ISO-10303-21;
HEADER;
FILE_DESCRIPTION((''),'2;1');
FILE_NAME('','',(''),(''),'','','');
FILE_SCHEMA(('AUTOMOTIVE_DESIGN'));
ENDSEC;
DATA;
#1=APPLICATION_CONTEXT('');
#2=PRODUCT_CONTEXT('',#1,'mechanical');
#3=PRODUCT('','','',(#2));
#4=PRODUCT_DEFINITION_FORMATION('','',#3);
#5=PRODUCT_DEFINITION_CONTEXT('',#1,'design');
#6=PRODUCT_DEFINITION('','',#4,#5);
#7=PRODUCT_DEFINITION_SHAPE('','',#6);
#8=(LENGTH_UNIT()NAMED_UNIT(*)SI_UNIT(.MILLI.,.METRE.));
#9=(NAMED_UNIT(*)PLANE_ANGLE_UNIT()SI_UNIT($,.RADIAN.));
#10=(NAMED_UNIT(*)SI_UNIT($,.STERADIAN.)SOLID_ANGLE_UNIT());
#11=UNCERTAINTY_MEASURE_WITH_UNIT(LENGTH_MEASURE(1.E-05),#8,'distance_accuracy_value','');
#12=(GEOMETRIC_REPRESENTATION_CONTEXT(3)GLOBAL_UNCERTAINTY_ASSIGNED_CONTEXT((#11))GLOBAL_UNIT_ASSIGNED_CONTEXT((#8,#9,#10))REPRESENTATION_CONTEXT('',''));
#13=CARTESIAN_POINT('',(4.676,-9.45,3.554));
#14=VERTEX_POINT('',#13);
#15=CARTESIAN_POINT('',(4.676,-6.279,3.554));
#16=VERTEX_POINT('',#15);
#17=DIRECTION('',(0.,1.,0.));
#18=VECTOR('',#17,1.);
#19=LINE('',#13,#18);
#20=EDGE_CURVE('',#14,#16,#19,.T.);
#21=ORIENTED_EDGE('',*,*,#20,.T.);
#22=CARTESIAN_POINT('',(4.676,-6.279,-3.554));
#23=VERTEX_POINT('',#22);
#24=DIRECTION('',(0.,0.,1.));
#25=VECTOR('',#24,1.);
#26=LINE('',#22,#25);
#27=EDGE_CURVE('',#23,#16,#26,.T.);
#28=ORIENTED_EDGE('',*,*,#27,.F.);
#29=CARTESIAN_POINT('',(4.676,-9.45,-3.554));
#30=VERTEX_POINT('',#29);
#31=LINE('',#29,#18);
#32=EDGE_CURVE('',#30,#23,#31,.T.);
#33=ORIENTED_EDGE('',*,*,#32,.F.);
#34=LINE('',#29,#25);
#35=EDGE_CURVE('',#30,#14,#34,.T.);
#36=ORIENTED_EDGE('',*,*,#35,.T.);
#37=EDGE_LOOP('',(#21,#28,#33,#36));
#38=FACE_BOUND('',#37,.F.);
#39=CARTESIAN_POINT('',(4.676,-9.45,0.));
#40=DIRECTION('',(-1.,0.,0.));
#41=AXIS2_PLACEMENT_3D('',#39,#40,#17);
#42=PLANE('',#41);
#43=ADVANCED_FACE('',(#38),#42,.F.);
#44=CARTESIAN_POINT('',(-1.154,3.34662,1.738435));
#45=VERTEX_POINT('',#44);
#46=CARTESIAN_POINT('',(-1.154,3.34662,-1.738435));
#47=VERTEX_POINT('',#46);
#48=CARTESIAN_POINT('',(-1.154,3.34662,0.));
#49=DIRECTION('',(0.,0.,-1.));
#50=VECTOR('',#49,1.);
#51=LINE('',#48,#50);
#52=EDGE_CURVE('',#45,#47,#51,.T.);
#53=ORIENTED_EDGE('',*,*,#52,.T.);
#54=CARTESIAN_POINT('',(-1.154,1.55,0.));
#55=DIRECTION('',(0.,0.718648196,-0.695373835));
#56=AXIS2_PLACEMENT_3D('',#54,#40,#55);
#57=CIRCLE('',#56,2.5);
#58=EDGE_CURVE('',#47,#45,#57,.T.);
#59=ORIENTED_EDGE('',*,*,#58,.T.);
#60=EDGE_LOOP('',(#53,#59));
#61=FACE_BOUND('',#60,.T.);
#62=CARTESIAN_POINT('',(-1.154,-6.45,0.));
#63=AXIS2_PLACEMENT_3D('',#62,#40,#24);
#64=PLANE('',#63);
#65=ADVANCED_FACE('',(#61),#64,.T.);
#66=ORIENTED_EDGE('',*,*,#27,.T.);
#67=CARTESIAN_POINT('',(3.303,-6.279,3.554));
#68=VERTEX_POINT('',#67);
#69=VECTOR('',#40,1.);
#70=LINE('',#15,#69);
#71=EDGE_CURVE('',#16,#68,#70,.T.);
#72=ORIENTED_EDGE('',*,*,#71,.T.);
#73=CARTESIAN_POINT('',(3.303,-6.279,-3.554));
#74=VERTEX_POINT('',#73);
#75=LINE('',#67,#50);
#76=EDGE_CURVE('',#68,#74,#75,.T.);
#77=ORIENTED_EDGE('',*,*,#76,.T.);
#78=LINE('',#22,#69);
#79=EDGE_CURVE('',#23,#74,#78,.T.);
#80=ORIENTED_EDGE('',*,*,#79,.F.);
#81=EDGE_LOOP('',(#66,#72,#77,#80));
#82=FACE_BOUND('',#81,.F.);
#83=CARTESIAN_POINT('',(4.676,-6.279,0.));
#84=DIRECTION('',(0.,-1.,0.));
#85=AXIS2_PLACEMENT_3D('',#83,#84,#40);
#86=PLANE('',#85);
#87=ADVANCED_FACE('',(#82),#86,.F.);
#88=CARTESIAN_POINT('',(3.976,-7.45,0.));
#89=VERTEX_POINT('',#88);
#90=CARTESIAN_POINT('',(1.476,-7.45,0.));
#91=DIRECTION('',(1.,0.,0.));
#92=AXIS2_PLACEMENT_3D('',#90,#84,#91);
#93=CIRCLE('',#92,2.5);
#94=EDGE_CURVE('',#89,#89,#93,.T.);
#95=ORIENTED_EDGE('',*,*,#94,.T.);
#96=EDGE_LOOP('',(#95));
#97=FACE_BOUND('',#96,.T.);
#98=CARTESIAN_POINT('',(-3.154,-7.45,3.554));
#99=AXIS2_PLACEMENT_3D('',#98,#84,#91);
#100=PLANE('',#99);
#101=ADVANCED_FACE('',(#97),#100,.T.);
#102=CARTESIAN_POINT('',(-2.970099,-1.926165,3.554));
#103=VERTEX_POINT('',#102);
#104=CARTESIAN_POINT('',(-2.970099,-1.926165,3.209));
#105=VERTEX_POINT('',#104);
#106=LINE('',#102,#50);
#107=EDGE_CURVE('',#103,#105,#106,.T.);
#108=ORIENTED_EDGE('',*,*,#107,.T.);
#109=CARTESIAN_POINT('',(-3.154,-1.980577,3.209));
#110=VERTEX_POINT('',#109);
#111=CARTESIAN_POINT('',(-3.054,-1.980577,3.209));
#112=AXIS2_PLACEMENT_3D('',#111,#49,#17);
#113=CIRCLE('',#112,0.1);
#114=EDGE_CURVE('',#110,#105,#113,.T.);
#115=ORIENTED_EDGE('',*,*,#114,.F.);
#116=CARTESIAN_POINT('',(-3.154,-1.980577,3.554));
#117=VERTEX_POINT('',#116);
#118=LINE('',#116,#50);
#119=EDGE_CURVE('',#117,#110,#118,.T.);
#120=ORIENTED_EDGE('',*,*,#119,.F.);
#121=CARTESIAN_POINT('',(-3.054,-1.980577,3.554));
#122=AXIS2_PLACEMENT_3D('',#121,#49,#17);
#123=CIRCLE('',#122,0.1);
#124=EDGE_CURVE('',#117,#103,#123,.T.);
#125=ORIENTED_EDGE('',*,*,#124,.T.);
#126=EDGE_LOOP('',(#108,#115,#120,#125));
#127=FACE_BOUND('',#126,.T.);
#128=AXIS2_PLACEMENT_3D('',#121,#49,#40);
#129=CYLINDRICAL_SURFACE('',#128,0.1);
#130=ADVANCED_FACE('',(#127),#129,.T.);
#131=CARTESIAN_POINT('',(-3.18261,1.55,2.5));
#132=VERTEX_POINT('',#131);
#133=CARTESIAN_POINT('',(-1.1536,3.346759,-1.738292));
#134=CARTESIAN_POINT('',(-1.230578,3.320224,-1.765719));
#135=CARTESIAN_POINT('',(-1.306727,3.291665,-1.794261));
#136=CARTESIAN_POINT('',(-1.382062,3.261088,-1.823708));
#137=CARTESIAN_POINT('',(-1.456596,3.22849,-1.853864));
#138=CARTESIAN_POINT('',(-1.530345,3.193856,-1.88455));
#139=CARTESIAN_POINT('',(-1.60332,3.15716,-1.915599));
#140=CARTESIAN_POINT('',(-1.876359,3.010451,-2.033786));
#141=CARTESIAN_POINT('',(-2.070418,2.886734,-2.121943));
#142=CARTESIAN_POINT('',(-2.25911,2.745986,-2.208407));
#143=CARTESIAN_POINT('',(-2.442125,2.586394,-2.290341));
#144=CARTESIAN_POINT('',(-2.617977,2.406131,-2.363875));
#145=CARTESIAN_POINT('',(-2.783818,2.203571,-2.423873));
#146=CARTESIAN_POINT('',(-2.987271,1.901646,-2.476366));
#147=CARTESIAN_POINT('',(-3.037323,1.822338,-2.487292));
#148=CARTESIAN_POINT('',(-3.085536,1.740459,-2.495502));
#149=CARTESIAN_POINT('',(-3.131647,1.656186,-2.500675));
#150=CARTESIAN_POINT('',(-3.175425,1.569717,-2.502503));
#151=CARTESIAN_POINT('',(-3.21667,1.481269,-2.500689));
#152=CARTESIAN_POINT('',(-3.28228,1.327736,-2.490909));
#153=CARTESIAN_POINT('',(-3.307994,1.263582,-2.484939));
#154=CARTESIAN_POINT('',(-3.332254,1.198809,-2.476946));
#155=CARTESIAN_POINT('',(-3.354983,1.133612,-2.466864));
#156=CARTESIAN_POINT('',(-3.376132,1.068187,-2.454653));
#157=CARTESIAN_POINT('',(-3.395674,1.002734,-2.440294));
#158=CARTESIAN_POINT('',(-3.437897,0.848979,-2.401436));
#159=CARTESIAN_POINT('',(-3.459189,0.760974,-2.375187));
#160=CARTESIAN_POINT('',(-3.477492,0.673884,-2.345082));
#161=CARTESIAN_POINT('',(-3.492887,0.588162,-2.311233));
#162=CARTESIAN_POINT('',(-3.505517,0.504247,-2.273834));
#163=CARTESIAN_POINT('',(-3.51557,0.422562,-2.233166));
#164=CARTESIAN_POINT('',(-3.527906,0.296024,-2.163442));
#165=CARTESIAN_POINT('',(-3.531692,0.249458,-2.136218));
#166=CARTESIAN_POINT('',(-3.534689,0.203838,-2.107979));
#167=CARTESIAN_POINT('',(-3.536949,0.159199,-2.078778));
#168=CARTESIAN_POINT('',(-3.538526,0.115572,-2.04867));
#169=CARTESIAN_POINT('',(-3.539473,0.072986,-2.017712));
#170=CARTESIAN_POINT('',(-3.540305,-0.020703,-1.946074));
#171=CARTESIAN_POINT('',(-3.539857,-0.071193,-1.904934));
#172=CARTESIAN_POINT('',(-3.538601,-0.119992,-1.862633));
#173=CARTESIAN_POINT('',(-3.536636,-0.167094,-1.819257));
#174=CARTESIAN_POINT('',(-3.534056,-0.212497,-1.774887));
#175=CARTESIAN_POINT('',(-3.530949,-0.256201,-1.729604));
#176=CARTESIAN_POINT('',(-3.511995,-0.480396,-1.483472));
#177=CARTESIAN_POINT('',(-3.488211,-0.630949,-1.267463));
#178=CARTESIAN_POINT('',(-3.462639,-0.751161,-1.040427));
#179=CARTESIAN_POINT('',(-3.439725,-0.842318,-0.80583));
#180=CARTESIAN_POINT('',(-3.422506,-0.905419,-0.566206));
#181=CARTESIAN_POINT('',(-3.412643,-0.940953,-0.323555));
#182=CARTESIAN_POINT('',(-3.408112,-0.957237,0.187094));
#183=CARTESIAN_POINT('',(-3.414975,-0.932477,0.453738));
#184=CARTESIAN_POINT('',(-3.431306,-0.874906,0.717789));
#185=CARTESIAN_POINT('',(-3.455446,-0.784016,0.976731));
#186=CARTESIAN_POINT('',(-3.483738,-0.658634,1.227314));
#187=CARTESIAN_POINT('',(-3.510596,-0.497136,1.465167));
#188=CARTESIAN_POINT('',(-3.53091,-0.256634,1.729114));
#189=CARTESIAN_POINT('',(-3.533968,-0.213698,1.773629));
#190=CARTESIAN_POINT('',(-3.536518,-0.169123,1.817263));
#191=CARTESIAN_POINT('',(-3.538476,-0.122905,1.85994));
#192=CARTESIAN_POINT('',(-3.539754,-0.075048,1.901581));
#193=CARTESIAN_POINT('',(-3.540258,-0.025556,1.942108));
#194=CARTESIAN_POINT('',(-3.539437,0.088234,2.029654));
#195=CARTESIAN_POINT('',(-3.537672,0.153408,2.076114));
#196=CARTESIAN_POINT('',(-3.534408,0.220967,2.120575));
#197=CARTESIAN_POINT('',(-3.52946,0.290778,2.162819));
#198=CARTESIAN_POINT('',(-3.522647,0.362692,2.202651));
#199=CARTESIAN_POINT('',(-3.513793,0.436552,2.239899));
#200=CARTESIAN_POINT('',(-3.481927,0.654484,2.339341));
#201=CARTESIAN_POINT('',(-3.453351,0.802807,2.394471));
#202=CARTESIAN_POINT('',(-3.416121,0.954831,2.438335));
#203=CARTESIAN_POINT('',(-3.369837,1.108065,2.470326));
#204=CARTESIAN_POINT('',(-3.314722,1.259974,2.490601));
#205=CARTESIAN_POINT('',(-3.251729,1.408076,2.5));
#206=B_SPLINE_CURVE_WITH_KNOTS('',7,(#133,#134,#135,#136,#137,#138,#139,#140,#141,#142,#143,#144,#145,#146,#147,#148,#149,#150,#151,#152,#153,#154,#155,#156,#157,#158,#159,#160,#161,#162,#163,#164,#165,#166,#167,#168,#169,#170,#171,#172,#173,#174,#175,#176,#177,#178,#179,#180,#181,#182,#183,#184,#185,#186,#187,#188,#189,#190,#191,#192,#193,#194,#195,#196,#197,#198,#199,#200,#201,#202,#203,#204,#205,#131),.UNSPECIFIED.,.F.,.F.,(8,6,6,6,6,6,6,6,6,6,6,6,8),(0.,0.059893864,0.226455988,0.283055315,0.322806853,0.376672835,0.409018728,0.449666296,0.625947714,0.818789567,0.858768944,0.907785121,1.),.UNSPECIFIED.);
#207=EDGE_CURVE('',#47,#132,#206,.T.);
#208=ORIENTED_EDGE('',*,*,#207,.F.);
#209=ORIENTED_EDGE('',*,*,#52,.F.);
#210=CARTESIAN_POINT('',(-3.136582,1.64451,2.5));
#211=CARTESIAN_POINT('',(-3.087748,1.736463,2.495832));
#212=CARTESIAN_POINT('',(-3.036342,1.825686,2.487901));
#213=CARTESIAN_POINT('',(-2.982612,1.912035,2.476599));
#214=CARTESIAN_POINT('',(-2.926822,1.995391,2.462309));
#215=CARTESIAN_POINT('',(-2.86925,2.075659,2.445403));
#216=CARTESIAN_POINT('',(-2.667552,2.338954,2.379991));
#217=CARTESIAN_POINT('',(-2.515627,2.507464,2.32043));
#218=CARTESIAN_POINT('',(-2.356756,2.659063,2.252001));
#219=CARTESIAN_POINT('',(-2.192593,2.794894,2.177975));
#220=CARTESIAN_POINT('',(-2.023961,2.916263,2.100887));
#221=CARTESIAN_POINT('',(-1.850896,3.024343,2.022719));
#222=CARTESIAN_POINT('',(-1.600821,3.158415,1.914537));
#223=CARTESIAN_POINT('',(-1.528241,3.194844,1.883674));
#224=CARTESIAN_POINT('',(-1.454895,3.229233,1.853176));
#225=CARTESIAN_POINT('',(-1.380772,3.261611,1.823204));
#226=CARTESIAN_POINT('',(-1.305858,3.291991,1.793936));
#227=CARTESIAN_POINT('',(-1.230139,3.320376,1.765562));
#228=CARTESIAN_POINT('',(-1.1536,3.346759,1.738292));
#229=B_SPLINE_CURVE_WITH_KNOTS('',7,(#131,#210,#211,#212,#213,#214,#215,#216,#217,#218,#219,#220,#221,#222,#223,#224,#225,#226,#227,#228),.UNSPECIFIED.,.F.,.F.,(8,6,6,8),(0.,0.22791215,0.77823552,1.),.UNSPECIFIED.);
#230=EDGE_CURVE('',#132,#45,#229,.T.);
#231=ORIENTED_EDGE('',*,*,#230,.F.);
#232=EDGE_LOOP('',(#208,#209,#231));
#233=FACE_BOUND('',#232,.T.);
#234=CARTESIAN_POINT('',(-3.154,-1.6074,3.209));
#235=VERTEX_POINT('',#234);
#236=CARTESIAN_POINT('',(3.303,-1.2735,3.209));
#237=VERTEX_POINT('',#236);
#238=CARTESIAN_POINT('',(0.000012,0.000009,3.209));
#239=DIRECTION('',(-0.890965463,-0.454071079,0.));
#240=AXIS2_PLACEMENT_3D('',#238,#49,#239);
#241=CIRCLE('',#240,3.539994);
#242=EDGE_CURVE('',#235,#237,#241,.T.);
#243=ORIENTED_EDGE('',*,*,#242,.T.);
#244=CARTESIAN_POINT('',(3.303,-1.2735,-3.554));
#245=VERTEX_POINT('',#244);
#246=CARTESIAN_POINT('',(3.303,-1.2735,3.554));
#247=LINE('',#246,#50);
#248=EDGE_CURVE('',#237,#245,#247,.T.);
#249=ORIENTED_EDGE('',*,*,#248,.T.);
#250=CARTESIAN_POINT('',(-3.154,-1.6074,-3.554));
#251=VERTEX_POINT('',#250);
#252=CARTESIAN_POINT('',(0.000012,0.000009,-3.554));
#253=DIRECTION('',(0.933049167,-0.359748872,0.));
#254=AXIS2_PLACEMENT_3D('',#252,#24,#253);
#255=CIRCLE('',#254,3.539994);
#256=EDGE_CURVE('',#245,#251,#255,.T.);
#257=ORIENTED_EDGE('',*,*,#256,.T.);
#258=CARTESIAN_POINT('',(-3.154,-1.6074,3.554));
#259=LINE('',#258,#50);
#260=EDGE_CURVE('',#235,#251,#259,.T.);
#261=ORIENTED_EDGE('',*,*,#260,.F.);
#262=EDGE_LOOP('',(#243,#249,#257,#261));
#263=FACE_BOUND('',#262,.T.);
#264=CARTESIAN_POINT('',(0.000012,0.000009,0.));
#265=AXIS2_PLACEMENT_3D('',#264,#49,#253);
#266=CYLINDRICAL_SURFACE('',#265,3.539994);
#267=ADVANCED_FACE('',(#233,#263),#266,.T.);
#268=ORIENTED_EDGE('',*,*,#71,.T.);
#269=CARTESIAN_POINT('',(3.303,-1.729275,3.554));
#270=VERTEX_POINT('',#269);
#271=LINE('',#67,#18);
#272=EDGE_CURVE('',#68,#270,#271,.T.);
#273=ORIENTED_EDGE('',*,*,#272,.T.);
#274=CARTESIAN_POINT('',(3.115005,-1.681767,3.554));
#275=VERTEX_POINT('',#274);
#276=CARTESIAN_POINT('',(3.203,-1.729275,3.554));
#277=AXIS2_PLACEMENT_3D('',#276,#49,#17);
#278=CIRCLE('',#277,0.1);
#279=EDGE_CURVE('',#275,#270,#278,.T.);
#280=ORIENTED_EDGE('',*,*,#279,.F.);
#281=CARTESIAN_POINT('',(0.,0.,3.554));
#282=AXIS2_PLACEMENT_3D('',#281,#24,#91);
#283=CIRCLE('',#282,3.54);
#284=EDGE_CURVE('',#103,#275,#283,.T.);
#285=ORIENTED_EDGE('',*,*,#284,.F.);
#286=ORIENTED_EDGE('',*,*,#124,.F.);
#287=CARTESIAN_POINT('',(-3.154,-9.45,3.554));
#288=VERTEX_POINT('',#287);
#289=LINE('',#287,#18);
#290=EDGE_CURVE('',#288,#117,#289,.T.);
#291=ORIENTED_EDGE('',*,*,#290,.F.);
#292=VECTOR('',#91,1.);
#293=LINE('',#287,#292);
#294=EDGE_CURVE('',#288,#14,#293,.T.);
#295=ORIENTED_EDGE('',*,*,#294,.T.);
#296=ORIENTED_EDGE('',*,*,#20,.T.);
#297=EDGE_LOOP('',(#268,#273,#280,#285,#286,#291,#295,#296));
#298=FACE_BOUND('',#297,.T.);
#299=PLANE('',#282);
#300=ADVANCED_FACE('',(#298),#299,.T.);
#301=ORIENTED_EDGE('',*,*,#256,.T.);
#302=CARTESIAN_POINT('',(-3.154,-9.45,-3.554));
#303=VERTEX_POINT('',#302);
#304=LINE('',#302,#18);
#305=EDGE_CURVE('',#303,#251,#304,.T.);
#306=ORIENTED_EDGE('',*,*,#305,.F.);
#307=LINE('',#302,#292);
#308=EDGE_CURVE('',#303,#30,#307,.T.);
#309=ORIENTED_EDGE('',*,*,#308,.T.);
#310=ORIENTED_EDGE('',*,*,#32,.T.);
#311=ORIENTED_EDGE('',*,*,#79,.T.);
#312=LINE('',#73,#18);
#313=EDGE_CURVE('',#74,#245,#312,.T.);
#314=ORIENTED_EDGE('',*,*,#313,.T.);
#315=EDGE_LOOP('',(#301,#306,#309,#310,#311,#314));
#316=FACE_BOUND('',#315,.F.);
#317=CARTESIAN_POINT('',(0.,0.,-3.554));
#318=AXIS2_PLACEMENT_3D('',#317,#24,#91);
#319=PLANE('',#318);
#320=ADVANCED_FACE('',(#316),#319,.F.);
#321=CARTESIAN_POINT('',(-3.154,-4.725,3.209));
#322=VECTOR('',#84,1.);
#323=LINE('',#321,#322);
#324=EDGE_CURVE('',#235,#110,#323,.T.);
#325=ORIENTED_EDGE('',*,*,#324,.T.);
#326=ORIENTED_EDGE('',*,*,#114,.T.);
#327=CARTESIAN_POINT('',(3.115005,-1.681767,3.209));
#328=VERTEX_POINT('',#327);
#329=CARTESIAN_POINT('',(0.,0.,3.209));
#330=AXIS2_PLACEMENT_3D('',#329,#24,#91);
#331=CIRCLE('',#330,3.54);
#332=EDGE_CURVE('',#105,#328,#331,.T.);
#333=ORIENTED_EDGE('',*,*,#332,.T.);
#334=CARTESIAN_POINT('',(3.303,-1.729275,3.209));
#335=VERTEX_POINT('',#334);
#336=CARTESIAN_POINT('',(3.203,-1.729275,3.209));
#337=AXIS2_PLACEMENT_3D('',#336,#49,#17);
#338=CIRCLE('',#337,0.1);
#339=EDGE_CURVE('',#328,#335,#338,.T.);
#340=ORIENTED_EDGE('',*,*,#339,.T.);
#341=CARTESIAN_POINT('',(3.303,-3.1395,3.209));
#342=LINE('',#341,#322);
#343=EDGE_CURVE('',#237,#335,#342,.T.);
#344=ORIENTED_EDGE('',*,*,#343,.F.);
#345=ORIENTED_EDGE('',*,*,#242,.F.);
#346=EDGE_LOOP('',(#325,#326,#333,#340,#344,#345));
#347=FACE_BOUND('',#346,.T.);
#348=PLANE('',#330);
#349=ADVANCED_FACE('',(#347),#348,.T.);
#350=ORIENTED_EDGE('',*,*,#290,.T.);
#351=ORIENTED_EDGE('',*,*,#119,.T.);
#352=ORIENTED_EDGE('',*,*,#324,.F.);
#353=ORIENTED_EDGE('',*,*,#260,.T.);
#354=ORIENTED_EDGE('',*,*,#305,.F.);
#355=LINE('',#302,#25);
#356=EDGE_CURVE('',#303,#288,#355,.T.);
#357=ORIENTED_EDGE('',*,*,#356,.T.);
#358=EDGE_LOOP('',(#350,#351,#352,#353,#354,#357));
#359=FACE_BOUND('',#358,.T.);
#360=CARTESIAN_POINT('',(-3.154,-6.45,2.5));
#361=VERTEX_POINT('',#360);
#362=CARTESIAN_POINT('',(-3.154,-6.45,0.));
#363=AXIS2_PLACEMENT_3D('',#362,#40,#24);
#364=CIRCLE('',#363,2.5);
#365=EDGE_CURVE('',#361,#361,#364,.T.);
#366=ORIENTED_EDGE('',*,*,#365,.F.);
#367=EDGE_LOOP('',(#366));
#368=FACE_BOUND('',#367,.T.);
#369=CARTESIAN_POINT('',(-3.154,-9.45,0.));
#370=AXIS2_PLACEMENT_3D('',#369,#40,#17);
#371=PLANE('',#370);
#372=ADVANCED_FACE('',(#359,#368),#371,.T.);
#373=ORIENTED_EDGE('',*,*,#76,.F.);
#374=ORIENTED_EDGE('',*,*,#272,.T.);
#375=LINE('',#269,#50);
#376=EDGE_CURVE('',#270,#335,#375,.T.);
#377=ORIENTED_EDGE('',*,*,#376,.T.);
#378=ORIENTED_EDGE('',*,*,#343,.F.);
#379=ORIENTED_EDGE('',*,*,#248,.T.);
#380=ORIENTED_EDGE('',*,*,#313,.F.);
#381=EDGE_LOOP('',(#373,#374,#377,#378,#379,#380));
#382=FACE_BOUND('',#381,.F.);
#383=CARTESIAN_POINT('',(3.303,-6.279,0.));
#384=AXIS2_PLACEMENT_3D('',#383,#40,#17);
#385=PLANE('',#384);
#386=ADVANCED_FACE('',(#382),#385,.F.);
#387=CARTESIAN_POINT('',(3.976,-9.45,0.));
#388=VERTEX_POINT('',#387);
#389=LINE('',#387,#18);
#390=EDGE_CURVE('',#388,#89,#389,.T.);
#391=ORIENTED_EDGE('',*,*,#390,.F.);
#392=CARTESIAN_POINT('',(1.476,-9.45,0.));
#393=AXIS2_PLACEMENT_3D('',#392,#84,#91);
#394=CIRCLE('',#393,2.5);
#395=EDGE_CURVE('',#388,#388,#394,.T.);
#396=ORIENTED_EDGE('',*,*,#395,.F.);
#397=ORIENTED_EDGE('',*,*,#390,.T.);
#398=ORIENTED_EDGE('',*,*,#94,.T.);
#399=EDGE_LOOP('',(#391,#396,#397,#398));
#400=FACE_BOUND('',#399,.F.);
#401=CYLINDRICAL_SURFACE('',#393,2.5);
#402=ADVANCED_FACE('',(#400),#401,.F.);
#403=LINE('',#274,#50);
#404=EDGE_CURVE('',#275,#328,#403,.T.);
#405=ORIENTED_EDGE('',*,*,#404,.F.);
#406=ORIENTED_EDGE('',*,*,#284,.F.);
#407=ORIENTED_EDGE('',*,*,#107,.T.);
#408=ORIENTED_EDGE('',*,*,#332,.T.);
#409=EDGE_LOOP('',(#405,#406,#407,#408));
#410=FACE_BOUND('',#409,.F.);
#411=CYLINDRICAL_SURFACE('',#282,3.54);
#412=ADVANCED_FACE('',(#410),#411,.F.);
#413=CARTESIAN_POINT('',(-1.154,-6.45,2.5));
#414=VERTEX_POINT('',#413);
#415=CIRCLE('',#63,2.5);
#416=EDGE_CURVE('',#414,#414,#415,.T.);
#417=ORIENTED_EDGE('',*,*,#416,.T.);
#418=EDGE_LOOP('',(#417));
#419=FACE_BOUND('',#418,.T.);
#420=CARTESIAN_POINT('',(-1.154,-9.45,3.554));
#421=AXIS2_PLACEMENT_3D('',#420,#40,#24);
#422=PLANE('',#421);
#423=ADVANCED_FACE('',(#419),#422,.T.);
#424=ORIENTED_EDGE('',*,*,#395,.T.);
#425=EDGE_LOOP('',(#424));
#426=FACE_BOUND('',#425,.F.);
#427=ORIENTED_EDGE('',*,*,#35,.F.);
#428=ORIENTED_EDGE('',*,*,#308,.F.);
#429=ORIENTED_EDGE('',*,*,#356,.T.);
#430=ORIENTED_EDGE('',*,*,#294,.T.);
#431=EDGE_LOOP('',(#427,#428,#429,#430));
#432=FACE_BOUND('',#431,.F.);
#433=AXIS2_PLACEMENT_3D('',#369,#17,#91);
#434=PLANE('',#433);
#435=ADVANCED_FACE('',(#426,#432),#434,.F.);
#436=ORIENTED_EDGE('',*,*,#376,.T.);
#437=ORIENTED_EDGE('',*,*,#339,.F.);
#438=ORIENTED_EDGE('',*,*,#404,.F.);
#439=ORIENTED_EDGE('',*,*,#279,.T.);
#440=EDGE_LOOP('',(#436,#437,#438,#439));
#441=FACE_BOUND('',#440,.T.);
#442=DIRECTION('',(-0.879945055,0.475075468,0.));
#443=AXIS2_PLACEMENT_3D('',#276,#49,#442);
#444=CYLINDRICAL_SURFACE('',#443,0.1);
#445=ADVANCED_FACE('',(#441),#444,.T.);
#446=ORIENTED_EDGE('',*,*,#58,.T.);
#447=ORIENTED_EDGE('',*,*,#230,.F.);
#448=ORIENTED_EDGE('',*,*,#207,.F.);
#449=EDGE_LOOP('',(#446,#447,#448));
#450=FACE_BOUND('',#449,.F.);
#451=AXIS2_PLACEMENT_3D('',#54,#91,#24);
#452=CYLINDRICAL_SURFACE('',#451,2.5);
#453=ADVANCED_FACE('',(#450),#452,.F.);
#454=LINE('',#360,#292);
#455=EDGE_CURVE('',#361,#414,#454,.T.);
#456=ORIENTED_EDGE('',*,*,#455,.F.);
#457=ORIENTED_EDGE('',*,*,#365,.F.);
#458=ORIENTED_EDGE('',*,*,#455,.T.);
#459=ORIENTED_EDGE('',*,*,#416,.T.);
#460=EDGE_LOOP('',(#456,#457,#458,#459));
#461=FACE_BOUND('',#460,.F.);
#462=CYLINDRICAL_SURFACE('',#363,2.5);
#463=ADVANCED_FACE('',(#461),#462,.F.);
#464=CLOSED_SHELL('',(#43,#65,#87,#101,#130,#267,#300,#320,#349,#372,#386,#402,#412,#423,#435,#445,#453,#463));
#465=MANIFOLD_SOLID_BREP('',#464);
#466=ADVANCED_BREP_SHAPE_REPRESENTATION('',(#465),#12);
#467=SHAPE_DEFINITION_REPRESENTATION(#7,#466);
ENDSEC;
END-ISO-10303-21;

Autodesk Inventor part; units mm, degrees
ref_plane "YZ Plane" through (0, 0, 0) normal (1, 0, 0) x (0, 1, 0)
ref_plane "XZ Plane" through (0, 0, 0) normal (0, 1, 0) x (-1, 0, 0)
ref_plane "XY Plane" through (0, 0, 0) normal (0, 0, 1) x (1, 0, 0)
sketch "Sketch1" plane through (0, 0, 0) normal (0, 0, 1) x (1, 0, 0)
  line L0 (-3.154, -9.45) -> (4.676, -9.45)
  line L1 (4.676, -9.45) -> (4.676, -6.279)
  line L2 (4.676, -6.279) -> (3.303, -6.279)
  line L3 (3.303, -6.279) -> (3.303, -1.2735)
  line L4 (-3.154, -9.45) -> (-3.154, -1.6074)
  arc A0 (3.303, -1.2735) -> (-3.154, -1.6074) centre (0, 0) ccw
  dimension "d0" = 7.83
  dimension "d1" = 9.45
  dimension "d2" = 3.54
  dimension "d3" = 3.154
  dimension "d4" = 3.171
  dimension "d5" = 6.457
extrude "Extrusion1" add sketch "Sketch1" along normal mid plane 7.108
sketch "Sketch2" plane through (-3.154, -9.45, 3.554) normal (0, -1, 0) x (1, 0, 0)
  line L0 (7.83, -7.108) -> (7.83, 0) projected
  circle A0 centre (4.63, -3.554) radius 2.5
  point P0 (3.154, -3.554)
  dimension "d8" = 5
  dimension "d9" = 3.2
extrude "Extrusion2" cut sketch "Sketch2" against normal blind 2
sketch "Sketch3" plane through (-3.154, -9.45, 3.554) normal (-1, 0, 0) x (0, 0, 1)
  line L0 (0, 0) -> (-7.108, 0) projected
  circle A0 centre (-3.554, 3) radius 2.5
  point P0 (-3.554, 9.45)
  dimension "d12" = 5
  dimension "d13" = 3
extrude "Extrusion3" cut sketch "Sketch3" against normal blind 2
sketch "Sketch4" plane through (-1.154, -6.45, 0) normal (-1, 0, 0) x (0, 0, 1)
  circle A0 centre (0, 0) radius 2.5 construction
  circle A1 centre (0, 8) radius 2.5
  circle A2 centre (0, 0) radius 2.5 projected
  point P0 (0, 6.45)
  dimension "d16" = 8
extrude "Extrusion4" cut sketch "Sketch4" along normal through all contours A1
sketch "Sketch6" plane through (0, 0, 3.554) normal (0, 0, 1) x (1, 0, 0)
  arc A0 (3.303, -1.2735) -> (-3.154, -1.6074) centre (0, 0) ccw projected
  circle A1 centre (0, 0) radius 3.54
extrude "Extrusion6" cut sketch "Sketch6" against normal blind 0.345
fillet "Fillet2" radius 0.1 2 edges at (-3.154, -1.6074, 3.3815) (3.303, -1.2735, 3.3815)
properties part number "LEG RHS" material "250"
